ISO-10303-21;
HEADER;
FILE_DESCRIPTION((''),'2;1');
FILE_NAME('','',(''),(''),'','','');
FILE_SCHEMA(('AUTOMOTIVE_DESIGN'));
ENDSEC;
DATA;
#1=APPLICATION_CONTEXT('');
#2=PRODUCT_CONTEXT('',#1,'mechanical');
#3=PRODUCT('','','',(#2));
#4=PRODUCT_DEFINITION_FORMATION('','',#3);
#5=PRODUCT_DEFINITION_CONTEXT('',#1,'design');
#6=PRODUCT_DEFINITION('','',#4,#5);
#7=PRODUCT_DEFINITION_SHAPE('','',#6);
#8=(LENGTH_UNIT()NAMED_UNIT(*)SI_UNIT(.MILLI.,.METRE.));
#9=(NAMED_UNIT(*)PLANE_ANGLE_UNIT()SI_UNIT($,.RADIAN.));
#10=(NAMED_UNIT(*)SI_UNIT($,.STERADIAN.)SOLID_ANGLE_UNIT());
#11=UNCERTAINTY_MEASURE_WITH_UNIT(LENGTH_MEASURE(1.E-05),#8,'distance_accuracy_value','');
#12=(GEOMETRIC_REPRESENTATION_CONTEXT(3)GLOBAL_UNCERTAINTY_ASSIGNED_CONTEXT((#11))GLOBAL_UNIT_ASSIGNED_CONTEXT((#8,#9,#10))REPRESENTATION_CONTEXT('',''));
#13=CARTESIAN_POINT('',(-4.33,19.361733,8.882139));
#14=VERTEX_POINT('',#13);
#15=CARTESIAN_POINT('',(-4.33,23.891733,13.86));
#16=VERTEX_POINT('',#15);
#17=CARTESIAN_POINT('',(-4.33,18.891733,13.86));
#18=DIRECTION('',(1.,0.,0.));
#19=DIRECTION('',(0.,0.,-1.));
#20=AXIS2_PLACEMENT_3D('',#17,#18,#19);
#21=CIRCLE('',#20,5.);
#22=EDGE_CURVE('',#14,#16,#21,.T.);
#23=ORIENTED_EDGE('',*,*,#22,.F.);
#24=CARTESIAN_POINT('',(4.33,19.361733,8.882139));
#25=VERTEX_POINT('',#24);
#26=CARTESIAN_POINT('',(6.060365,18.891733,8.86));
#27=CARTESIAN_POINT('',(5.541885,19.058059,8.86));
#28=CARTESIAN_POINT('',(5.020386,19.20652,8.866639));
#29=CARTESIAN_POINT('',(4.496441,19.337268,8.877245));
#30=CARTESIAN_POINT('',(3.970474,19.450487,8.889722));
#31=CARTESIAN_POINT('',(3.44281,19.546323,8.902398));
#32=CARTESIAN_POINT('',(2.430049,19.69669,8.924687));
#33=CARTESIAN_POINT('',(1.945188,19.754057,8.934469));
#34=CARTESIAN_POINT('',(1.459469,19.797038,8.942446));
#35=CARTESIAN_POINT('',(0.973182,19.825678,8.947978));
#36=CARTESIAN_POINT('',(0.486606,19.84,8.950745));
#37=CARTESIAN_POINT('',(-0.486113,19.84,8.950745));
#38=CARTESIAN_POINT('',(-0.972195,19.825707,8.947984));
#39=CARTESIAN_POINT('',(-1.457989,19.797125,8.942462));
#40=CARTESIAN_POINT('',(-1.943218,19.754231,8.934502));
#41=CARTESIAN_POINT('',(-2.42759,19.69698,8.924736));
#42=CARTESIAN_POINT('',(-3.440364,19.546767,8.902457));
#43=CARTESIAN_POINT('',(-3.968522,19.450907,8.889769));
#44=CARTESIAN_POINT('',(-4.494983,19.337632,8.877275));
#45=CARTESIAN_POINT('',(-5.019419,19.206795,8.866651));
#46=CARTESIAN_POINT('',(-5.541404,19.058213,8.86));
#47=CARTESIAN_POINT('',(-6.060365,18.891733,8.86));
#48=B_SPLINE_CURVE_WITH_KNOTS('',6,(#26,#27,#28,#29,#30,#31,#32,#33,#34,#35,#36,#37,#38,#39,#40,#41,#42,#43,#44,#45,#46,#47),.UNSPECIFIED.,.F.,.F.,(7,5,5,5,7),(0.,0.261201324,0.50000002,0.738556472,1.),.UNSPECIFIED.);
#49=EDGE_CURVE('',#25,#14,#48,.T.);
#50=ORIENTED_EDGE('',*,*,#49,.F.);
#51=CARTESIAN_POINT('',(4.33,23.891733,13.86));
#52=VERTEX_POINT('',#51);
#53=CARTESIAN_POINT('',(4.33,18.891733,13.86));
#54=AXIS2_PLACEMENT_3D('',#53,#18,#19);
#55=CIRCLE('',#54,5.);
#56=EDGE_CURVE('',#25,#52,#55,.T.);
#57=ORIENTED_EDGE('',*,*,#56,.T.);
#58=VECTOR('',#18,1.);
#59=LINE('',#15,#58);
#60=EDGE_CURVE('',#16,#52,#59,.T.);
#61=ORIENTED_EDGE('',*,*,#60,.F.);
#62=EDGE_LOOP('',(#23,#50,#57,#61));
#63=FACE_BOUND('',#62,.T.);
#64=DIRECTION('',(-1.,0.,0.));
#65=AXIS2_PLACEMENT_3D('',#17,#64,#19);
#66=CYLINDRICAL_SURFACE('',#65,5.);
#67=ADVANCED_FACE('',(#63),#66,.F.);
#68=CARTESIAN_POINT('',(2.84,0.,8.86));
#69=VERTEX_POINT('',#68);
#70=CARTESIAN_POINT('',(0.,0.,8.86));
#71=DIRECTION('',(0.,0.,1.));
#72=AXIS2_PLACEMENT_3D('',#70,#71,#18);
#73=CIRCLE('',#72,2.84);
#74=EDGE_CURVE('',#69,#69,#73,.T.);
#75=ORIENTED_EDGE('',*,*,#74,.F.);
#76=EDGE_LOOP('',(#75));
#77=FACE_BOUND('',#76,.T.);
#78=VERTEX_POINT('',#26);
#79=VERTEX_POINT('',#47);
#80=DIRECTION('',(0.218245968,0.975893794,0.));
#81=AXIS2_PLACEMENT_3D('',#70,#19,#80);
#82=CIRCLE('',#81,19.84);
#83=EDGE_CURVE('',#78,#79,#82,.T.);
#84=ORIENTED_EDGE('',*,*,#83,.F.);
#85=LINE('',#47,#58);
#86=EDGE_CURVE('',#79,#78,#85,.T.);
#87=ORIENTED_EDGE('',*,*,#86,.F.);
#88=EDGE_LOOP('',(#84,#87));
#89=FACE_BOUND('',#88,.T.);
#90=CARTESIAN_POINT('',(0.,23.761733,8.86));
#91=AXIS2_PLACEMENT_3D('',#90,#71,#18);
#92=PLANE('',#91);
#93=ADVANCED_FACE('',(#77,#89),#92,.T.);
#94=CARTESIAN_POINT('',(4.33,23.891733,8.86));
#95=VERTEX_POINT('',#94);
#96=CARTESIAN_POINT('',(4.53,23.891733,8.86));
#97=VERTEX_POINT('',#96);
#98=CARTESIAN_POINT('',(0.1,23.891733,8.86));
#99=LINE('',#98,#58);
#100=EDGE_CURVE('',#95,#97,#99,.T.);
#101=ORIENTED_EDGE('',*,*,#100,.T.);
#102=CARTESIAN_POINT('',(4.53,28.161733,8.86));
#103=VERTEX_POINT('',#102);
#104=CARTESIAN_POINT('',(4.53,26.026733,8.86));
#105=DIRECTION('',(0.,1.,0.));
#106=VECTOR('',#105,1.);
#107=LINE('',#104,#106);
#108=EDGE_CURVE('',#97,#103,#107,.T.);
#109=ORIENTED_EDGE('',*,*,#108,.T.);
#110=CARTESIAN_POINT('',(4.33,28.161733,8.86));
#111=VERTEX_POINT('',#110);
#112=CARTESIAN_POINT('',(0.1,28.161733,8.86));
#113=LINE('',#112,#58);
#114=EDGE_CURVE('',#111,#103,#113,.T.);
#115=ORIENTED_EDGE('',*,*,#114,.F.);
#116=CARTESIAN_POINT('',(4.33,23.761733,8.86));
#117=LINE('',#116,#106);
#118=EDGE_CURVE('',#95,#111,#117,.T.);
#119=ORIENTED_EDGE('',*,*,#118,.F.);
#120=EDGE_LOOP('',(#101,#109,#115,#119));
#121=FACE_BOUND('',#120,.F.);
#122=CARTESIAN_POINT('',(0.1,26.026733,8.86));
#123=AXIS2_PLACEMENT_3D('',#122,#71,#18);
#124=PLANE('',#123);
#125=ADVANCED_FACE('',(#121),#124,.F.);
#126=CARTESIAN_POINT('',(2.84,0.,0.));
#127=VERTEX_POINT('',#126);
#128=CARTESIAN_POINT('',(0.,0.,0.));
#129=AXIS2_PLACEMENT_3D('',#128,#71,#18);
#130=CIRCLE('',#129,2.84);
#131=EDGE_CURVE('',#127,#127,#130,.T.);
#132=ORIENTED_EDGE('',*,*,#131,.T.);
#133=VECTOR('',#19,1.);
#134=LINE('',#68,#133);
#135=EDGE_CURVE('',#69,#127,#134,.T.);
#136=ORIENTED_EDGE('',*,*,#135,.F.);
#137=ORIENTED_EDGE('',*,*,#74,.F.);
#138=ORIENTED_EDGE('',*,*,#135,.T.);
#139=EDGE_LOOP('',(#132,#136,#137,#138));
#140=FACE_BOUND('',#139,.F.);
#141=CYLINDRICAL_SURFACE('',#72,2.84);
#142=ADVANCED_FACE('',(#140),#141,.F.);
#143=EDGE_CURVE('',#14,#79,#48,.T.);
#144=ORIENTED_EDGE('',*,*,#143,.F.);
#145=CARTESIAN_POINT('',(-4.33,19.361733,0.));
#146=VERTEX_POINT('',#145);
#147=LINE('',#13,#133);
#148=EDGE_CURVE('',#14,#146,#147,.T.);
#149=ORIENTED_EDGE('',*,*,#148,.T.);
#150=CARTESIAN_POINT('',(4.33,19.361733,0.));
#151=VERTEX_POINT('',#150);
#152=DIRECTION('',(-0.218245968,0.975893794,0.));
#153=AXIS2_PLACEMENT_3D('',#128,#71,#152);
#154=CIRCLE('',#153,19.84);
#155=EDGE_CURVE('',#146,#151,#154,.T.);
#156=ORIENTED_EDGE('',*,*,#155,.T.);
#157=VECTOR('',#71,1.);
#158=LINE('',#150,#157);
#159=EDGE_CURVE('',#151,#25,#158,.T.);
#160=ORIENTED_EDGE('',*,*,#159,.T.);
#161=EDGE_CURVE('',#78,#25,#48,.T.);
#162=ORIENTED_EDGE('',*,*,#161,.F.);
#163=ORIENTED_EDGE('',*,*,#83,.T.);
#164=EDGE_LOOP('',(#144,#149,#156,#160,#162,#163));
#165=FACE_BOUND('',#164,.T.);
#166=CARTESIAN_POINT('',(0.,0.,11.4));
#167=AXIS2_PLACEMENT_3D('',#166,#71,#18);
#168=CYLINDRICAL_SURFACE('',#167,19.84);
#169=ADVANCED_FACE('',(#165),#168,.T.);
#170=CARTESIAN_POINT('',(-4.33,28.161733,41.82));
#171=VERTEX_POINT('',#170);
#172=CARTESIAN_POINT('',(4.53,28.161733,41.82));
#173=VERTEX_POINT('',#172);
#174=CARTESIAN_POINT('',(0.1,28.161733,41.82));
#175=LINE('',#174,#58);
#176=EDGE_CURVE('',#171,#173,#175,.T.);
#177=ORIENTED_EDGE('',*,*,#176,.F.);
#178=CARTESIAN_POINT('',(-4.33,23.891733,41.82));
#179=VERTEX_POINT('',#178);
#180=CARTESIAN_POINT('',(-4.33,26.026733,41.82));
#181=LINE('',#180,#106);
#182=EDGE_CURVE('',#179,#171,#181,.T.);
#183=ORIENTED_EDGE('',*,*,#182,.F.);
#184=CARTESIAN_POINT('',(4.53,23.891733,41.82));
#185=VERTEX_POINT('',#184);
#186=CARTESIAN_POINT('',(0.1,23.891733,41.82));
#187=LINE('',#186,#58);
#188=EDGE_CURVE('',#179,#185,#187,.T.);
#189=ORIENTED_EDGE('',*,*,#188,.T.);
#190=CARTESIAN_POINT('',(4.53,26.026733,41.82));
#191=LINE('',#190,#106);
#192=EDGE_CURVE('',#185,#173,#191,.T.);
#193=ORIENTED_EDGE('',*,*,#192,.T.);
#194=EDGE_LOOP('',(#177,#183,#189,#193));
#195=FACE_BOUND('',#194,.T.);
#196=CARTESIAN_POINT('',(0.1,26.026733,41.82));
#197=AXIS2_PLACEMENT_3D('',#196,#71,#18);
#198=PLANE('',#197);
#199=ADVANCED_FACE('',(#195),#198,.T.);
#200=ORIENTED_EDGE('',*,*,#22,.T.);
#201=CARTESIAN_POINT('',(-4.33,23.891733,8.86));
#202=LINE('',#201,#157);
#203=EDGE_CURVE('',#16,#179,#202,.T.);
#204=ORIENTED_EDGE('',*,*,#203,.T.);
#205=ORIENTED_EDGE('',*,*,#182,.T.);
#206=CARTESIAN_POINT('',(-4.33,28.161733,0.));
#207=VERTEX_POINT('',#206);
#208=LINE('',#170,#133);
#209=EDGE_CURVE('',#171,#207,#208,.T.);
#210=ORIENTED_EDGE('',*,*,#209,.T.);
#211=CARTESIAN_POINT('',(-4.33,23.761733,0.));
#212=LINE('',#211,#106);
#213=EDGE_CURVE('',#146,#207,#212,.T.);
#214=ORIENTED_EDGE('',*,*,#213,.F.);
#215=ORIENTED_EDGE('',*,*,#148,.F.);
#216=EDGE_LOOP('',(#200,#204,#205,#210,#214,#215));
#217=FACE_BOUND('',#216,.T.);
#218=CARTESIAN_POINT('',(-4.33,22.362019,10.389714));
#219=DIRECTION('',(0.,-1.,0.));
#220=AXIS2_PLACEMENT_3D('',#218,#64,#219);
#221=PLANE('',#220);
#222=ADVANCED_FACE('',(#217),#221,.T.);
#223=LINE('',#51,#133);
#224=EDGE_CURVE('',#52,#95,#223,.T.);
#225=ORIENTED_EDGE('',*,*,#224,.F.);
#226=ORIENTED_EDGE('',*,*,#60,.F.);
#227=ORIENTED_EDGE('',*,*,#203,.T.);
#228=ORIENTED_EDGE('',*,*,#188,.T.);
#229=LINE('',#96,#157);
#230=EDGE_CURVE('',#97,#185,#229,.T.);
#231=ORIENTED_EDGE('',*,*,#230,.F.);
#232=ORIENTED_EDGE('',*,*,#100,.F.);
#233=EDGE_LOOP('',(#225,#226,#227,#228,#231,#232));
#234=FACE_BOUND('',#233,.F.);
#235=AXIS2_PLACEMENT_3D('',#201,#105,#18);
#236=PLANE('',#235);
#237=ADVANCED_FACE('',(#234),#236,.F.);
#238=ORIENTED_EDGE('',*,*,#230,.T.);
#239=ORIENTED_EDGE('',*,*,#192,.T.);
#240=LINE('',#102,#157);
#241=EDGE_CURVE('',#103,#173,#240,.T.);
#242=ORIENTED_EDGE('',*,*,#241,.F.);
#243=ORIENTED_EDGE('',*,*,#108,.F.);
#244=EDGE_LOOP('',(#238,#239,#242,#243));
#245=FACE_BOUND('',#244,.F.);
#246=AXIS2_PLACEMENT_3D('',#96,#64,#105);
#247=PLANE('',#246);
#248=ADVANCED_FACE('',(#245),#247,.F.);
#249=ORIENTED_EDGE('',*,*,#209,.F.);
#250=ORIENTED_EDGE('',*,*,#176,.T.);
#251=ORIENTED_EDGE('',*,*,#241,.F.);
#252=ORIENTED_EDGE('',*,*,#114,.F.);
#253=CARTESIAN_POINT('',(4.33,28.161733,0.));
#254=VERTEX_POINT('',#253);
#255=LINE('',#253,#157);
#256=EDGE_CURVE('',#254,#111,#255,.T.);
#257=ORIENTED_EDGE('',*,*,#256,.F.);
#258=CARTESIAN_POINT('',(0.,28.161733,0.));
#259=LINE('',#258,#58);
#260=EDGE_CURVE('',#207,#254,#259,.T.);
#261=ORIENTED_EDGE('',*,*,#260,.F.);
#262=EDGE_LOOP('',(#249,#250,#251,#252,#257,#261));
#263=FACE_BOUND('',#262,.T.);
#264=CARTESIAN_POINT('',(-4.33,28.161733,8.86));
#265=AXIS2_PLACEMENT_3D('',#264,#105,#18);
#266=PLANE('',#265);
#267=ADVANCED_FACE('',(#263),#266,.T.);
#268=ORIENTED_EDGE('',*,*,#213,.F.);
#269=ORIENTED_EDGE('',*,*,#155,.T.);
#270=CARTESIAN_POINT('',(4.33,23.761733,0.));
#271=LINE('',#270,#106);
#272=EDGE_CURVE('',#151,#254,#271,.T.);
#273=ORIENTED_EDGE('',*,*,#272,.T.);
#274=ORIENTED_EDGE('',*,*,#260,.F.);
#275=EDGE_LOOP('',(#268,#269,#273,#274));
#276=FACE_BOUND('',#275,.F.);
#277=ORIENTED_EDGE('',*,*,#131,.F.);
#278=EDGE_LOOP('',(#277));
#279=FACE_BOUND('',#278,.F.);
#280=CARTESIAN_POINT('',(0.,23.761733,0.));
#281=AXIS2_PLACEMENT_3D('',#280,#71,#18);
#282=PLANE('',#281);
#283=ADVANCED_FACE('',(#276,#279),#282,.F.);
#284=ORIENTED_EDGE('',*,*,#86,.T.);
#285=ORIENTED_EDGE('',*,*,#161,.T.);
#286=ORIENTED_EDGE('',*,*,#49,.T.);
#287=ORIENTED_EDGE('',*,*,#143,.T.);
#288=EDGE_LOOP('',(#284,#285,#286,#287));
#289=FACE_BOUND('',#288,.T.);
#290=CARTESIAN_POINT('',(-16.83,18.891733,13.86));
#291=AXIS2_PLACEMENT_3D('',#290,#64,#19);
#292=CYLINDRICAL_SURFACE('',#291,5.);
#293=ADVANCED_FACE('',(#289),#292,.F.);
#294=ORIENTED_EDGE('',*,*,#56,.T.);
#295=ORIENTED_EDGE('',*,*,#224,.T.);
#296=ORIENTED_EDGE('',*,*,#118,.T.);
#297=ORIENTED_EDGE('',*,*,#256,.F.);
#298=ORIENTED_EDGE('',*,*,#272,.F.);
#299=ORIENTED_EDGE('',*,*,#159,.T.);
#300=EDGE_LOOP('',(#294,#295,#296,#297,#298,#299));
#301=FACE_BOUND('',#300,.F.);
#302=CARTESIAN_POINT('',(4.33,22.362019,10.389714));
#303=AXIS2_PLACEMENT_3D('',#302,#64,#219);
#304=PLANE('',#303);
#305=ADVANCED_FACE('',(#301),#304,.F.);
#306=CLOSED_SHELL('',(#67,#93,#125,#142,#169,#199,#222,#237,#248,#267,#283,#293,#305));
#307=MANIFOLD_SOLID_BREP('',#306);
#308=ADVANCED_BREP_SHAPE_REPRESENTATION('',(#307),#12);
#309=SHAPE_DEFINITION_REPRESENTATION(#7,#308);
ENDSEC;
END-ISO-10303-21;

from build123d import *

# Parameters (mm, degrees)
F0_R        = 19.84
F1_DEPTH    = 8.86
F2_W        = 8.66
F2_H        = 8.8
F3_DEPTH    = 8.86
F4_W        = 8.86
F4_H        = 4.27
F5_DEPTH    = 32.96
F6_R        = 2.84
F7_DEPTH    = 8.86
F8_T1_DEPTH = 8.66
F8_T6_DEPTH = 33.66
F8_S7_R     = 19.84
F8_T8_DEPTH = 19


# Not quite as in the source:
# - a fillet or chamfer that OpenCascade refuses, or shapes differently, is made with other operations: its cross-section is extruded or revolved along the edge and cut away or added


with BuildPart() as f1:
    # F0 (on Top) → F1 (new body)
    with BuildSketch(Plane.XY):
        Circle(F0_R)
    extrude(amount=F1_DEPTH)

    # F2 (on Top) → F3 (join)
    with BuildSketch(Plane.XY):
        with Locations((0, 23.761732877)):
            Rectangle(F2_W, F2_H)
    extrude(amount=F3_DEPTH)

    # F4 (on face) → F5 (join)
    with BuildSketch(Plane.XY.offset(8.86)):
        with Locations((0.1, 26.026732877)):
            Rectangle(F4_W, F4_H)
    extrude(amount=F5_DEPTH)

    # F6 (on face) → F7 (cut, through all)
    with BuildSketch(Plane.XY.offset(8.86)):
        Circle(F6_R)
    extrude(amount=-F7_DEPTH, mode=Mode.SUBTRACT)

    # F8: fillet of radius 5 on 1 edges, made by hand

    # F8_s2 → F8_t1 (join)
    with BuildSketch(Plane.YZ.offset(-4.33)):
        with BuildLine():
            ThreePointArc((18.891732877, 8.86), (22.4272667829, 10.3244660941), (23.891732877, 13.86))
            Line((23.891732877, 13.86), (23.891732877, 8.86))
            Line((23.891732877, 8.86), (18.891732877, 8.86))
        make_face()
    extrude(amount=F8_T1_DEPTH)


with BuildPart() as f8_tool4:
    # F8_s5 → F8_t6 (new body)
    with BuildSketch(Plane.YZ.offset(-16.83)):
        with BuildLine():
            ThreePointArc((18.891732877, 8.86), (22.4272667829, 10.3244660941), (23.891732877, 13.86))
            Line((23.891732877, 13.86), (23.891732877, 8.86))
            Line((23.891732877, 8.86), (18.891732877, 8.86))
        make_face()
    extrude(amount=F8_T6_DEPTH)

    # F8_s7 → F8_t8 (intersect, symmetric)
    with BuildSketch(Plane.XY.offset(11.4)):
        Circle(F8_S7_R)
    extrude(amount=F8_T8_DEPTH, both=True, mode=Mode.INTERSECT)


with BuildPart() as f1_1:
    add(f1.part)

    # F8_t3: union F8_tool4
    add(f8_tool4.part)


solid = f1_1.part
